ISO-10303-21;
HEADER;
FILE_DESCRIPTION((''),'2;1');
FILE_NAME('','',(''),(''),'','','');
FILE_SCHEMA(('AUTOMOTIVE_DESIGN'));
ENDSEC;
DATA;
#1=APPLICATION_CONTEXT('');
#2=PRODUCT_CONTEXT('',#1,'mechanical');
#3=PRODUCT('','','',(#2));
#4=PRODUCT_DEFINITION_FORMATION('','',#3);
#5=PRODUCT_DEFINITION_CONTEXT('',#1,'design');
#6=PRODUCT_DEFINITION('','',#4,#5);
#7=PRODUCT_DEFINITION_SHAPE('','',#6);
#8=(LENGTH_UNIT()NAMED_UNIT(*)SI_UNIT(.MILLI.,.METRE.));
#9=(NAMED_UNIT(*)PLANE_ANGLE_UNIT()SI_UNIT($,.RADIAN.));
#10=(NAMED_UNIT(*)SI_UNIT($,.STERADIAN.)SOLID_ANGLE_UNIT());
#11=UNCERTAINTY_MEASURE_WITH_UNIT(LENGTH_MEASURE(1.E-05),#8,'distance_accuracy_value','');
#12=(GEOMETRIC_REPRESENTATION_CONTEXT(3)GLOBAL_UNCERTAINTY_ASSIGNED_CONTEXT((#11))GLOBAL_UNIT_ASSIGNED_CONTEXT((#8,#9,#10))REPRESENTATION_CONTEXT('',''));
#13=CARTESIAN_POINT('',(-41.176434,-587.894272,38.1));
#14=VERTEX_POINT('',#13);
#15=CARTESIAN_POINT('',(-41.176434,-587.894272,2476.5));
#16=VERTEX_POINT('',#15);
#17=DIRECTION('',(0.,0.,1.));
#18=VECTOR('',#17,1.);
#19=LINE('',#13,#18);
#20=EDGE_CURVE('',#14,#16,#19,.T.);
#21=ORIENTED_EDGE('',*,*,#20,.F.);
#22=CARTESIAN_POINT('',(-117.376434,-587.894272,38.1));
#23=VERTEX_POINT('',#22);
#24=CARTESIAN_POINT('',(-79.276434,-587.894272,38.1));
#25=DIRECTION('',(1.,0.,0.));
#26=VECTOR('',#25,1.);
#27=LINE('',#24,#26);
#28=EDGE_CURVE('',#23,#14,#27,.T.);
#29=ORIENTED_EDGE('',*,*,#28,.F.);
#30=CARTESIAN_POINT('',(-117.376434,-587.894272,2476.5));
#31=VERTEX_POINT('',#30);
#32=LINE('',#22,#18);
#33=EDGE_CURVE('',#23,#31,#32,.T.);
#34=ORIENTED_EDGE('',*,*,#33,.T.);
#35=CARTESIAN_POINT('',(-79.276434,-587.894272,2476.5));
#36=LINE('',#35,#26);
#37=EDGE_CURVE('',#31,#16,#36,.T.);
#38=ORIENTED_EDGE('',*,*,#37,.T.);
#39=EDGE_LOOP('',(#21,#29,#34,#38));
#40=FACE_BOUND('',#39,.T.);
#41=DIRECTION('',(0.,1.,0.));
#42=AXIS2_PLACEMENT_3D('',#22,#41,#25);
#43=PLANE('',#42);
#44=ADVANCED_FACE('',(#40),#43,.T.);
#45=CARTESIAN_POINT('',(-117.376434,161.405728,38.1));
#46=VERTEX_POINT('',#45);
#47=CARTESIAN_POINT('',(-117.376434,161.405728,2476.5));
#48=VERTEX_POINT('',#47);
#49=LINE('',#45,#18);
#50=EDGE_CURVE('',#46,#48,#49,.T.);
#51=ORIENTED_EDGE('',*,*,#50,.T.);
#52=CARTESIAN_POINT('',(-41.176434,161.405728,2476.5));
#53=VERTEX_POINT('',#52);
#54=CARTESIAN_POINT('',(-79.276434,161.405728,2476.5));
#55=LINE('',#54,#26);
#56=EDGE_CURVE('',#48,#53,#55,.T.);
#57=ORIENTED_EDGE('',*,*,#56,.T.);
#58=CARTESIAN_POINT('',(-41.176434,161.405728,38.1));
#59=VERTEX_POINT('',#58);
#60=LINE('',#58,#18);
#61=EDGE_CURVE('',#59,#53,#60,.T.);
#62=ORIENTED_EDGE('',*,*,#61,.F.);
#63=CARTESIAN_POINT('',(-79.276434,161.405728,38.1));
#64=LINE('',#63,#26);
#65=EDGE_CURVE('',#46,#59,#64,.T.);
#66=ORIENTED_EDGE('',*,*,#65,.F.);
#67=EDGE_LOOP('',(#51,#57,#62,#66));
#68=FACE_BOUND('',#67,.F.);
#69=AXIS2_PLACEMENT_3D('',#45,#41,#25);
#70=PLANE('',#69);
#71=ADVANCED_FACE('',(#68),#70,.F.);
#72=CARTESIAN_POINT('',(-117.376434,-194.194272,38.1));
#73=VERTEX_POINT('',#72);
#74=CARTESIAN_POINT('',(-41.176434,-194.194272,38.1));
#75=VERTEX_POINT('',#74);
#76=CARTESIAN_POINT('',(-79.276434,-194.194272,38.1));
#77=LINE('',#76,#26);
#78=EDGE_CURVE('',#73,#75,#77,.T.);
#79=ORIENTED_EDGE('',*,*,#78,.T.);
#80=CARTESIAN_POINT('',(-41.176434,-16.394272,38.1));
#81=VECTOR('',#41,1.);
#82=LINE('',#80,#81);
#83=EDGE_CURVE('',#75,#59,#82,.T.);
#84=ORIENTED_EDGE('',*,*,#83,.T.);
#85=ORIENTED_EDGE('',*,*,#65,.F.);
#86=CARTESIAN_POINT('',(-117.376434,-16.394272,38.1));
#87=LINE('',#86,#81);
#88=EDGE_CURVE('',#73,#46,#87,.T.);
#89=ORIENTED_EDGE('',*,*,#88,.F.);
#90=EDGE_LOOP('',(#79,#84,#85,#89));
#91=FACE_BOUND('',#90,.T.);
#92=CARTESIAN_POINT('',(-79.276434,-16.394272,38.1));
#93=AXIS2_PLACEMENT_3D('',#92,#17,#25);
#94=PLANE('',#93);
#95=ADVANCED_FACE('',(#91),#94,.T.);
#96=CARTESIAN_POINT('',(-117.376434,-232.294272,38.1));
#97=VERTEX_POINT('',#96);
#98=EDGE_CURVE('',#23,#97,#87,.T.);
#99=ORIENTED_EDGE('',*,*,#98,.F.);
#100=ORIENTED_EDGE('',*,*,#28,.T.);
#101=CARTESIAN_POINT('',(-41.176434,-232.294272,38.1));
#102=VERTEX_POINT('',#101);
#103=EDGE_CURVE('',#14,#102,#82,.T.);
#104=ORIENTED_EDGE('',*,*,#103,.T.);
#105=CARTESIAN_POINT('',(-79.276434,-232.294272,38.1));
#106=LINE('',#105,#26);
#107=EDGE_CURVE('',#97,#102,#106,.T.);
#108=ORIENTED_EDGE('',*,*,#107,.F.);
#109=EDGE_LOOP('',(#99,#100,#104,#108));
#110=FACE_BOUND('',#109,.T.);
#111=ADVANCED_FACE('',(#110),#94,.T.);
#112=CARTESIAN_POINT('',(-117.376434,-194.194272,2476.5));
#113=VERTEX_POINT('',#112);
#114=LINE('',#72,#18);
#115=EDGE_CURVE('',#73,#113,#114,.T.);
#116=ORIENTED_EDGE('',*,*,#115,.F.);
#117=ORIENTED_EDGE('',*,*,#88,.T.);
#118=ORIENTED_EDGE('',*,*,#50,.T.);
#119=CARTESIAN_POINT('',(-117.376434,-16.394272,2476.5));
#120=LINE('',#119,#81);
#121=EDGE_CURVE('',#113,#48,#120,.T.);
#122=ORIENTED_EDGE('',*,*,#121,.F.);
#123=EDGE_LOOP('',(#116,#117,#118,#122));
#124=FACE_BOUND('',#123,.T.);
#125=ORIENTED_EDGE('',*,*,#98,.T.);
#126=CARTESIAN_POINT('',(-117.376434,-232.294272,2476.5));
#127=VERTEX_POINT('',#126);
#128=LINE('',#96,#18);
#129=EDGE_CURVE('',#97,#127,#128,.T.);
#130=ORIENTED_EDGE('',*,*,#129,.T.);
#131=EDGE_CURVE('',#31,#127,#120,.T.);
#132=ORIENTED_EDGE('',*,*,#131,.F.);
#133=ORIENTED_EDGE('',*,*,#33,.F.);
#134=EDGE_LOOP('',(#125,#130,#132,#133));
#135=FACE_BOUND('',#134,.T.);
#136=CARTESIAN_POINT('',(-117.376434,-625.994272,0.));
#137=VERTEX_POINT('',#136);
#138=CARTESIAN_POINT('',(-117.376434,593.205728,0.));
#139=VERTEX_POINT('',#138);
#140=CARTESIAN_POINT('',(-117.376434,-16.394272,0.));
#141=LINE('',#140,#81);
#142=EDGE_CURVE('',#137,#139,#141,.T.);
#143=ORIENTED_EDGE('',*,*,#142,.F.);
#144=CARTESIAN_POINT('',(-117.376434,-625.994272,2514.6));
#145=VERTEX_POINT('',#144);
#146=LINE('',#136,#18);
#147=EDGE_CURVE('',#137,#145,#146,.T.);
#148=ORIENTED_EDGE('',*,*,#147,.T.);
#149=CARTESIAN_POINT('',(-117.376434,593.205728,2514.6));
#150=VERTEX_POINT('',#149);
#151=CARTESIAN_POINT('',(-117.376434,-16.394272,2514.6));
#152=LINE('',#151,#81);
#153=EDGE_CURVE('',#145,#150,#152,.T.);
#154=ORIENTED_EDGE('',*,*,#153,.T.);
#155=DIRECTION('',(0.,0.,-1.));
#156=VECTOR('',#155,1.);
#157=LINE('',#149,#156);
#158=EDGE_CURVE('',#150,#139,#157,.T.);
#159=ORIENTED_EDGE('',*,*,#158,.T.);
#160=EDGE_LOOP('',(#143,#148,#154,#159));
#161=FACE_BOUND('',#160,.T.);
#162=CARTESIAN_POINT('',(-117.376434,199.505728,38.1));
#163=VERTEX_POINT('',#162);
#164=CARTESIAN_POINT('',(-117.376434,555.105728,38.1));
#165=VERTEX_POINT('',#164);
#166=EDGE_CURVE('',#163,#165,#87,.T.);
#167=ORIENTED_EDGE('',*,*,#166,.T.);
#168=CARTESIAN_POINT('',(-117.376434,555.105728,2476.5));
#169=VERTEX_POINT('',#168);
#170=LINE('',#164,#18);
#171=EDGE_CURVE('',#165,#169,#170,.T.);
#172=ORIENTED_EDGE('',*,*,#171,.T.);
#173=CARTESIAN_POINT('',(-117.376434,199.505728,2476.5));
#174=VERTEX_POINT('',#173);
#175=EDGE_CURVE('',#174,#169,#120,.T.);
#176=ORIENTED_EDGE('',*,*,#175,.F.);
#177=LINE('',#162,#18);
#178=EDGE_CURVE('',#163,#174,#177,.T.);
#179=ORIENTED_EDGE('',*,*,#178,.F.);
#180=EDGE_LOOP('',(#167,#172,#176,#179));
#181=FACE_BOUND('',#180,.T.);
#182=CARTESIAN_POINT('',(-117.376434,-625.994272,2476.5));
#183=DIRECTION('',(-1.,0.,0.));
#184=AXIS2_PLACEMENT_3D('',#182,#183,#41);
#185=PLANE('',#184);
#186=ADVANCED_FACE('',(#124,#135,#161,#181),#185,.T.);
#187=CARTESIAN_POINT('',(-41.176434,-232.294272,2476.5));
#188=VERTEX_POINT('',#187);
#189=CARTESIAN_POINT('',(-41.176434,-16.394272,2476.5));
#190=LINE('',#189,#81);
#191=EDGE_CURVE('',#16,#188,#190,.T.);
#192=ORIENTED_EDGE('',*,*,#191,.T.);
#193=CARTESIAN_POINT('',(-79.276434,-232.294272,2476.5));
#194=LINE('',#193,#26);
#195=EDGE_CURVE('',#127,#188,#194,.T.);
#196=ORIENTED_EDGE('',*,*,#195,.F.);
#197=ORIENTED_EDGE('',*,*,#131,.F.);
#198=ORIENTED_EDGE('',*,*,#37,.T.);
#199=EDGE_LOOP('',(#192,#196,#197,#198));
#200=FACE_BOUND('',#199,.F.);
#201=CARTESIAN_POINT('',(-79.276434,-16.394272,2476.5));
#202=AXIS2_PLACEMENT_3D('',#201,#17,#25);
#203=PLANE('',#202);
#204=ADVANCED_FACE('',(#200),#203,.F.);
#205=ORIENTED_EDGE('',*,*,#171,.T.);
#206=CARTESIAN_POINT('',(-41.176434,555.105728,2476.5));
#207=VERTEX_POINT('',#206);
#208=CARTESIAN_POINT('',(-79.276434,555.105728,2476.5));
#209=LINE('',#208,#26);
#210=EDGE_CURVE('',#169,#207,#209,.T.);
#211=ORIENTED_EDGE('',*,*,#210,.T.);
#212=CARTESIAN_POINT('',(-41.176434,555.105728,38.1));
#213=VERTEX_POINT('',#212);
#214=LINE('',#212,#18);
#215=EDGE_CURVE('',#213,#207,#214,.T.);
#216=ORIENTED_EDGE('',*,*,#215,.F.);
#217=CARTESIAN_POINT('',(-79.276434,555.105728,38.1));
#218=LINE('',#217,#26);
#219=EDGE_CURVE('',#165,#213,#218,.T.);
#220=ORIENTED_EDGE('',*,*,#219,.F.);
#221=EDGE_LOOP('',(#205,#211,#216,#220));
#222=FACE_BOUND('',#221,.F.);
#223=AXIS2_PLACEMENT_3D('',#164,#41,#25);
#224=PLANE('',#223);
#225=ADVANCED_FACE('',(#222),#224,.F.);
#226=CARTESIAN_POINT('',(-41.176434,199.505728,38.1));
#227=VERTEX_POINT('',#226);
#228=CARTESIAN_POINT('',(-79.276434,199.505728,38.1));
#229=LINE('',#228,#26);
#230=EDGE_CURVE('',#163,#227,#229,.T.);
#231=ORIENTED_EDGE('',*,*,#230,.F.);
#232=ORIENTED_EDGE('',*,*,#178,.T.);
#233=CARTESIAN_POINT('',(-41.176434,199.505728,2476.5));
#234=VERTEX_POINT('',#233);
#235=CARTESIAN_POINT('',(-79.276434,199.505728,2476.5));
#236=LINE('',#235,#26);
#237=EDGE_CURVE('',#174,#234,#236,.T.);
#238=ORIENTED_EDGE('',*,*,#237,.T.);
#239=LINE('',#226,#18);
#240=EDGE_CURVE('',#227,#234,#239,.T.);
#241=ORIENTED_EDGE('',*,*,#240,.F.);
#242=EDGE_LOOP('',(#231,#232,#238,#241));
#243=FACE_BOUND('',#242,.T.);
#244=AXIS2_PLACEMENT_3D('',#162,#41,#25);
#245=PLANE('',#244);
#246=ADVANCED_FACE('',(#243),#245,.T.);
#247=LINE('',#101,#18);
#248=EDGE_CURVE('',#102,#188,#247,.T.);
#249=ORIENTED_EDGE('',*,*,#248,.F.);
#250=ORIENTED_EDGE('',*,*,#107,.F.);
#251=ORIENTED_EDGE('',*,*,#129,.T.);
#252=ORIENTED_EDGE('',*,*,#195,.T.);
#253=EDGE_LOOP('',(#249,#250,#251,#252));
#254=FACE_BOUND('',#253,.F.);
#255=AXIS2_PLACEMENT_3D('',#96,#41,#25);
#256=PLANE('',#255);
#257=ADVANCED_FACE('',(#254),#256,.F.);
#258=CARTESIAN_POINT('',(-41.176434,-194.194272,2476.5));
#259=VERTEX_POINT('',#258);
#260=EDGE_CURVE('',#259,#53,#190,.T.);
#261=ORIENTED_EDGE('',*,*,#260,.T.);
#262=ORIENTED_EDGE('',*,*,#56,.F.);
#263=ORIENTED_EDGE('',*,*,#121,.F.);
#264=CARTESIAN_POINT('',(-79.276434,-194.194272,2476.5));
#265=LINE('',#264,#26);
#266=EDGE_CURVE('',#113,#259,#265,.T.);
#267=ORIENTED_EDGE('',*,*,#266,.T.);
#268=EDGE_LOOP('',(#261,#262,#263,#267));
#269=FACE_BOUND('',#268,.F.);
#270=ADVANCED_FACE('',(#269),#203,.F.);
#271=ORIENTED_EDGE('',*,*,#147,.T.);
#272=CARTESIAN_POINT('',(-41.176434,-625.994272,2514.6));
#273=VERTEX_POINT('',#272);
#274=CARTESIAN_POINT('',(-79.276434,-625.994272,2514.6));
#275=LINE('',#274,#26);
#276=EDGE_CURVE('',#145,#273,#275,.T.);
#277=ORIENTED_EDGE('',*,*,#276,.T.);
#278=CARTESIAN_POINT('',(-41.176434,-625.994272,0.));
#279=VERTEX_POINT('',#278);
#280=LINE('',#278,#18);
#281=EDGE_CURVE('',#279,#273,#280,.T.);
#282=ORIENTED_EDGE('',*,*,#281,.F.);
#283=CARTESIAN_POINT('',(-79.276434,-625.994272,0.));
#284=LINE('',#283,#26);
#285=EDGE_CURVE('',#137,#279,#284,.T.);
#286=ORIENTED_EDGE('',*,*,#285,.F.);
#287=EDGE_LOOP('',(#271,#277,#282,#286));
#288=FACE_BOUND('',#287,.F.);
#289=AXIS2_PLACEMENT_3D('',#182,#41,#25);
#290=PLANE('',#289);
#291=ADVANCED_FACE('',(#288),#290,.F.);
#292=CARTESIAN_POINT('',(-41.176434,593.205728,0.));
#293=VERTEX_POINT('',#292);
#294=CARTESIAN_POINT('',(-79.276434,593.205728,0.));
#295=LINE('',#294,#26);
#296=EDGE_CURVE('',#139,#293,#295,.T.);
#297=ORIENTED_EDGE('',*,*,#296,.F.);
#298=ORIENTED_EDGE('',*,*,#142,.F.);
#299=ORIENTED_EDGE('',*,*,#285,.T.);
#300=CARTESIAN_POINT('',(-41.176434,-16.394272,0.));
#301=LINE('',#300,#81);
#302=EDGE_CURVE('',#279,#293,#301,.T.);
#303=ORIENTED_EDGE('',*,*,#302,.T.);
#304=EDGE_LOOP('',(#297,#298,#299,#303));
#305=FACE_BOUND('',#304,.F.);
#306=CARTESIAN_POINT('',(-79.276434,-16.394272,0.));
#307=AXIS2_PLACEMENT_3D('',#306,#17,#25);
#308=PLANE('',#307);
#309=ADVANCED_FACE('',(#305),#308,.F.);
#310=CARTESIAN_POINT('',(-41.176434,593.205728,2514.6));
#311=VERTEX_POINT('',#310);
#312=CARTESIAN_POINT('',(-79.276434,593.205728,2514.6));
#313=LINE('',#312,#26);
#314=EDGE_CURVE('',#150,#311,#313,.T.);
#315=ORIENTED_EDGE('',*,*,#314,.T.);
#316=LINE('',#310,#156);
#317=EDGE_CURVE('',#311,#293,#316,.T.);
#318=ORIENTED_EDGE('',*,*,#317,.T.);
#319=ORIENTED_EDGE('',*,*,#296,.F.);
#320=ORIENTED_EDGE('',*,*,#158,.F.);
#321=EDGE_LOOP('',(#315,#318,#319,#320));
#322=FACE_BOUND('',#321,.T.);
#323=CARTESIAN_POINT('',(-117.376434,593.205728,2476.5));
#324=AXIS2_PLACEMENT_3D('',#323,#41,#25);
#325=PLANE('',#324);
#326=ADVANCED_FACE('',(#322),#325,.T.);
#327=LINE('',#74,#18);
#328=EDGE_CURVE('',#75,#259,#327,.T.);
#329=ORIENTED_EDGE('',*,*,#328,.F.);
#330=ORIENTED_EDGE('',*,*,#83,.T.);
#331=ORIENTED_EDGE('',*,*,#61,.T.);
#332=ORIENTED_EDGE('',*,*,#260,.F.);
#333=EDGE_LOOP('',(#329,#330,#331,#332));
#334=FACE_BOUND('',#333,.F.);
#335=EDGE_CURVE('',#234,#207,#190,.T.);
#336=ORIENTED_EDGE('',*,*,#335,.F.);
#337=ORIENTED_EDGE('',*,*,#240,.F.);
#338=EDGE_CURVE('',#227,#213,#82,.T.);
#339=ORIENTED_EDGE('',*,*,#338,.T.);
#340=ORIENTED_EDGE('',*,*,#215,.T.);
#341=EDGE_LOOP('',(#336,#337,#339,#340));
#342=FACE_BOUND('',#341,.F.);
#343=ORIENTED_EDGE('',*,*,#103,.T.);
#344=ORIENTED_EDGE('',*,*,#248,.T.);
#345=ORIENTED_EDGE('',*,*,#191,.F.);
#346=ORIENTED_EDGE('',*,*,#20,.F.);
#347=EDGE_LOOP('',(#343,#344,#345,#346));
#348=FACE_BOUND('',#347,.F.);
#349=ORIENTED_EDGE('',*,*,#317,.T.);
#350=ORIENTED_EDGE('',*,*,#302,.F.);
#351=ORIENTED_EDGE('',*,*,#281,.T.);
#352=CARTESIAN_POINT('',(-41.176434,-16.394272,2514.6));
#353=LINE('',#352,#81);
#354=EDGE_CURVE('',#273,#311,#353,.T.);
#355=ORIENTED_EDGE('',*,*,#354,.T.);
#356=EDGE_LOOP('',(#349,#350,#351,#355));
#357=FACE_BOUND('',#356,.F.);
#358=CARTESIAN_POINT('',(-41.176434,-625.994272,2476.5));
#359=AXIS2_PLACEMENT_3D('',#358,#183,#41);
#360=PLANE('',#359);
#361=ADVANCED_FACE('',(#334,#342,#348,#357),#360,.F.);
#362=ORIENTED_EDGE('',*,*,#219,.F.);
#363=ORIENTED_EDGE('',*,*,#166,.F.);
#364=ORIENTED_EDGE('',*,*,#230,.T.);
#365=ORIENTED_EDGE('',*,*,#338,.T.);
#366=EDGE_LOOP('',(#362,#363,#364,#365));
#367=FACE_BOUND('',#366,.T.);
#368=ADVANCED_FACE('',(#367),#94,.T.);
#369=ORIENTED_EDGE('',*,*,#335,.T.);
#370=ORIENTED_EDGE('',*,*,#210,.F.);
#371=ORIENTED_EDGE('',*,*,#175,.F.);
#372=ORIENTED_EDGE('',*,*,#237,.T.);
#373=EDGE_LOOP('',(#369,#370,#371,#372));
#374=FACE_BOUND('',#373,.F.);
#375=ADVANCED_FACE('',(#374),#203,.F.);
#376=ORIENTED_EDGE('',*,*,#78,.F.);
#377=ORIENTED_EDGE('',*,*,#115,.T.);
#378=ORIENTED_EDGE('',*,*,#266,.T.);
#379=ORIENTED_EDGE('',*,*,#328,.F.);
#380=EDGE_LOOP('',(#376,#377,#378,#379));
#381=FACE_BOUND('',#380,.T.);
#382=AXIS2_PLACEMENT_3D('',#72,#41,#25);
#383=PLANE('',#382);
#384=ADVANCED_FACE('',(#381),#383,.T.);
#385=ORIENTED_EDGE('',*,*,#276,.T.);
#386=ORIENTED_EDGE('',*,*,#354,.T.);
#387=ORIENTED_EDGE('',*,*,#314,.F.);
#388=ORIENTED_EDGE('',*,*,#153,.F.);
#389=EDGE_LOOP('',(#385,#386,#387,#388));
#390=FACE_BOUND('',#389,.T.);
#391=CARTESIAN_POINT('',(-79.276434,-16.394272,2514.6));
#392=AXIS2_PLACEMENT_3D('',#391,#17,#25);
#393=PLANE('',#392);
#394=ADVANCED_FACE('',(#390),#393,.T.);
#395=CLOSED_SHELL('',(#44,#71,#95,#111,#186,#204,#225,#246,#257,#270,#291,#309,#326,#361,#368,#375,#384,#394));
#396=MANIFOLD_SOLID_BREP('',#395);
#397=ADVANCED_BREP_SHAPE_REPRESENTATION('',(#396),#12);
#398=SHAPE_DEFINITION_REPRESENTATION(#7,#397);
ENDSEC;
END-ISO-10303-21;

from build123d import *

# Parameters (mm, degrees)
F0_W     = 76.2
F0_H     = 1219.2
F1_DEPTH = 38.1
F2_W     = 76.2
F2_H     = 38.1
F3_DEPTH = 2438.4
F4_START = 2476.5
F4_DEPTH = 38.1


with BuildPart() as f1:
    # F0 (on Top) → F1 (new body)
    with BuildSketch(Plane.XY):
        with Locations((-79.2764335848, -16.3942715153)):
            Rectangle(F0_W, F0_H)
    extrude(amount=F1_DEPTH)

    # F2 (on face) → F3 (join)
    with BuildSketch(Plane.XY.offset(38.1)):
        with Locations((-79.2764335848, -606.9442715153)):
            Rectangle(F2_W, F2_H)
        with Locations((-79.2764335848, 574.1557284847)):
            Rectangle(F2_W, F2_H)
        with Locations((-79.2764335848, 180.4557284847)):
            Rectangle(F2_W, F2_H)
        with Locations((-79.2764335848, -213.2442715153)):
            Rectangle(F2_W, F2_H)
    extrude(amount=F3_DEPTH)

    # F0 (on Top) → F4 (join)
    with BuildSketch(Plane.XY.offset(F4_START)):
        with Locations((-79.2764335848, -16.3942715153)):
            Rectangle(F0_W, F0_H)
    extrude(amount=F4_DEPTH)


solid = f1.part
